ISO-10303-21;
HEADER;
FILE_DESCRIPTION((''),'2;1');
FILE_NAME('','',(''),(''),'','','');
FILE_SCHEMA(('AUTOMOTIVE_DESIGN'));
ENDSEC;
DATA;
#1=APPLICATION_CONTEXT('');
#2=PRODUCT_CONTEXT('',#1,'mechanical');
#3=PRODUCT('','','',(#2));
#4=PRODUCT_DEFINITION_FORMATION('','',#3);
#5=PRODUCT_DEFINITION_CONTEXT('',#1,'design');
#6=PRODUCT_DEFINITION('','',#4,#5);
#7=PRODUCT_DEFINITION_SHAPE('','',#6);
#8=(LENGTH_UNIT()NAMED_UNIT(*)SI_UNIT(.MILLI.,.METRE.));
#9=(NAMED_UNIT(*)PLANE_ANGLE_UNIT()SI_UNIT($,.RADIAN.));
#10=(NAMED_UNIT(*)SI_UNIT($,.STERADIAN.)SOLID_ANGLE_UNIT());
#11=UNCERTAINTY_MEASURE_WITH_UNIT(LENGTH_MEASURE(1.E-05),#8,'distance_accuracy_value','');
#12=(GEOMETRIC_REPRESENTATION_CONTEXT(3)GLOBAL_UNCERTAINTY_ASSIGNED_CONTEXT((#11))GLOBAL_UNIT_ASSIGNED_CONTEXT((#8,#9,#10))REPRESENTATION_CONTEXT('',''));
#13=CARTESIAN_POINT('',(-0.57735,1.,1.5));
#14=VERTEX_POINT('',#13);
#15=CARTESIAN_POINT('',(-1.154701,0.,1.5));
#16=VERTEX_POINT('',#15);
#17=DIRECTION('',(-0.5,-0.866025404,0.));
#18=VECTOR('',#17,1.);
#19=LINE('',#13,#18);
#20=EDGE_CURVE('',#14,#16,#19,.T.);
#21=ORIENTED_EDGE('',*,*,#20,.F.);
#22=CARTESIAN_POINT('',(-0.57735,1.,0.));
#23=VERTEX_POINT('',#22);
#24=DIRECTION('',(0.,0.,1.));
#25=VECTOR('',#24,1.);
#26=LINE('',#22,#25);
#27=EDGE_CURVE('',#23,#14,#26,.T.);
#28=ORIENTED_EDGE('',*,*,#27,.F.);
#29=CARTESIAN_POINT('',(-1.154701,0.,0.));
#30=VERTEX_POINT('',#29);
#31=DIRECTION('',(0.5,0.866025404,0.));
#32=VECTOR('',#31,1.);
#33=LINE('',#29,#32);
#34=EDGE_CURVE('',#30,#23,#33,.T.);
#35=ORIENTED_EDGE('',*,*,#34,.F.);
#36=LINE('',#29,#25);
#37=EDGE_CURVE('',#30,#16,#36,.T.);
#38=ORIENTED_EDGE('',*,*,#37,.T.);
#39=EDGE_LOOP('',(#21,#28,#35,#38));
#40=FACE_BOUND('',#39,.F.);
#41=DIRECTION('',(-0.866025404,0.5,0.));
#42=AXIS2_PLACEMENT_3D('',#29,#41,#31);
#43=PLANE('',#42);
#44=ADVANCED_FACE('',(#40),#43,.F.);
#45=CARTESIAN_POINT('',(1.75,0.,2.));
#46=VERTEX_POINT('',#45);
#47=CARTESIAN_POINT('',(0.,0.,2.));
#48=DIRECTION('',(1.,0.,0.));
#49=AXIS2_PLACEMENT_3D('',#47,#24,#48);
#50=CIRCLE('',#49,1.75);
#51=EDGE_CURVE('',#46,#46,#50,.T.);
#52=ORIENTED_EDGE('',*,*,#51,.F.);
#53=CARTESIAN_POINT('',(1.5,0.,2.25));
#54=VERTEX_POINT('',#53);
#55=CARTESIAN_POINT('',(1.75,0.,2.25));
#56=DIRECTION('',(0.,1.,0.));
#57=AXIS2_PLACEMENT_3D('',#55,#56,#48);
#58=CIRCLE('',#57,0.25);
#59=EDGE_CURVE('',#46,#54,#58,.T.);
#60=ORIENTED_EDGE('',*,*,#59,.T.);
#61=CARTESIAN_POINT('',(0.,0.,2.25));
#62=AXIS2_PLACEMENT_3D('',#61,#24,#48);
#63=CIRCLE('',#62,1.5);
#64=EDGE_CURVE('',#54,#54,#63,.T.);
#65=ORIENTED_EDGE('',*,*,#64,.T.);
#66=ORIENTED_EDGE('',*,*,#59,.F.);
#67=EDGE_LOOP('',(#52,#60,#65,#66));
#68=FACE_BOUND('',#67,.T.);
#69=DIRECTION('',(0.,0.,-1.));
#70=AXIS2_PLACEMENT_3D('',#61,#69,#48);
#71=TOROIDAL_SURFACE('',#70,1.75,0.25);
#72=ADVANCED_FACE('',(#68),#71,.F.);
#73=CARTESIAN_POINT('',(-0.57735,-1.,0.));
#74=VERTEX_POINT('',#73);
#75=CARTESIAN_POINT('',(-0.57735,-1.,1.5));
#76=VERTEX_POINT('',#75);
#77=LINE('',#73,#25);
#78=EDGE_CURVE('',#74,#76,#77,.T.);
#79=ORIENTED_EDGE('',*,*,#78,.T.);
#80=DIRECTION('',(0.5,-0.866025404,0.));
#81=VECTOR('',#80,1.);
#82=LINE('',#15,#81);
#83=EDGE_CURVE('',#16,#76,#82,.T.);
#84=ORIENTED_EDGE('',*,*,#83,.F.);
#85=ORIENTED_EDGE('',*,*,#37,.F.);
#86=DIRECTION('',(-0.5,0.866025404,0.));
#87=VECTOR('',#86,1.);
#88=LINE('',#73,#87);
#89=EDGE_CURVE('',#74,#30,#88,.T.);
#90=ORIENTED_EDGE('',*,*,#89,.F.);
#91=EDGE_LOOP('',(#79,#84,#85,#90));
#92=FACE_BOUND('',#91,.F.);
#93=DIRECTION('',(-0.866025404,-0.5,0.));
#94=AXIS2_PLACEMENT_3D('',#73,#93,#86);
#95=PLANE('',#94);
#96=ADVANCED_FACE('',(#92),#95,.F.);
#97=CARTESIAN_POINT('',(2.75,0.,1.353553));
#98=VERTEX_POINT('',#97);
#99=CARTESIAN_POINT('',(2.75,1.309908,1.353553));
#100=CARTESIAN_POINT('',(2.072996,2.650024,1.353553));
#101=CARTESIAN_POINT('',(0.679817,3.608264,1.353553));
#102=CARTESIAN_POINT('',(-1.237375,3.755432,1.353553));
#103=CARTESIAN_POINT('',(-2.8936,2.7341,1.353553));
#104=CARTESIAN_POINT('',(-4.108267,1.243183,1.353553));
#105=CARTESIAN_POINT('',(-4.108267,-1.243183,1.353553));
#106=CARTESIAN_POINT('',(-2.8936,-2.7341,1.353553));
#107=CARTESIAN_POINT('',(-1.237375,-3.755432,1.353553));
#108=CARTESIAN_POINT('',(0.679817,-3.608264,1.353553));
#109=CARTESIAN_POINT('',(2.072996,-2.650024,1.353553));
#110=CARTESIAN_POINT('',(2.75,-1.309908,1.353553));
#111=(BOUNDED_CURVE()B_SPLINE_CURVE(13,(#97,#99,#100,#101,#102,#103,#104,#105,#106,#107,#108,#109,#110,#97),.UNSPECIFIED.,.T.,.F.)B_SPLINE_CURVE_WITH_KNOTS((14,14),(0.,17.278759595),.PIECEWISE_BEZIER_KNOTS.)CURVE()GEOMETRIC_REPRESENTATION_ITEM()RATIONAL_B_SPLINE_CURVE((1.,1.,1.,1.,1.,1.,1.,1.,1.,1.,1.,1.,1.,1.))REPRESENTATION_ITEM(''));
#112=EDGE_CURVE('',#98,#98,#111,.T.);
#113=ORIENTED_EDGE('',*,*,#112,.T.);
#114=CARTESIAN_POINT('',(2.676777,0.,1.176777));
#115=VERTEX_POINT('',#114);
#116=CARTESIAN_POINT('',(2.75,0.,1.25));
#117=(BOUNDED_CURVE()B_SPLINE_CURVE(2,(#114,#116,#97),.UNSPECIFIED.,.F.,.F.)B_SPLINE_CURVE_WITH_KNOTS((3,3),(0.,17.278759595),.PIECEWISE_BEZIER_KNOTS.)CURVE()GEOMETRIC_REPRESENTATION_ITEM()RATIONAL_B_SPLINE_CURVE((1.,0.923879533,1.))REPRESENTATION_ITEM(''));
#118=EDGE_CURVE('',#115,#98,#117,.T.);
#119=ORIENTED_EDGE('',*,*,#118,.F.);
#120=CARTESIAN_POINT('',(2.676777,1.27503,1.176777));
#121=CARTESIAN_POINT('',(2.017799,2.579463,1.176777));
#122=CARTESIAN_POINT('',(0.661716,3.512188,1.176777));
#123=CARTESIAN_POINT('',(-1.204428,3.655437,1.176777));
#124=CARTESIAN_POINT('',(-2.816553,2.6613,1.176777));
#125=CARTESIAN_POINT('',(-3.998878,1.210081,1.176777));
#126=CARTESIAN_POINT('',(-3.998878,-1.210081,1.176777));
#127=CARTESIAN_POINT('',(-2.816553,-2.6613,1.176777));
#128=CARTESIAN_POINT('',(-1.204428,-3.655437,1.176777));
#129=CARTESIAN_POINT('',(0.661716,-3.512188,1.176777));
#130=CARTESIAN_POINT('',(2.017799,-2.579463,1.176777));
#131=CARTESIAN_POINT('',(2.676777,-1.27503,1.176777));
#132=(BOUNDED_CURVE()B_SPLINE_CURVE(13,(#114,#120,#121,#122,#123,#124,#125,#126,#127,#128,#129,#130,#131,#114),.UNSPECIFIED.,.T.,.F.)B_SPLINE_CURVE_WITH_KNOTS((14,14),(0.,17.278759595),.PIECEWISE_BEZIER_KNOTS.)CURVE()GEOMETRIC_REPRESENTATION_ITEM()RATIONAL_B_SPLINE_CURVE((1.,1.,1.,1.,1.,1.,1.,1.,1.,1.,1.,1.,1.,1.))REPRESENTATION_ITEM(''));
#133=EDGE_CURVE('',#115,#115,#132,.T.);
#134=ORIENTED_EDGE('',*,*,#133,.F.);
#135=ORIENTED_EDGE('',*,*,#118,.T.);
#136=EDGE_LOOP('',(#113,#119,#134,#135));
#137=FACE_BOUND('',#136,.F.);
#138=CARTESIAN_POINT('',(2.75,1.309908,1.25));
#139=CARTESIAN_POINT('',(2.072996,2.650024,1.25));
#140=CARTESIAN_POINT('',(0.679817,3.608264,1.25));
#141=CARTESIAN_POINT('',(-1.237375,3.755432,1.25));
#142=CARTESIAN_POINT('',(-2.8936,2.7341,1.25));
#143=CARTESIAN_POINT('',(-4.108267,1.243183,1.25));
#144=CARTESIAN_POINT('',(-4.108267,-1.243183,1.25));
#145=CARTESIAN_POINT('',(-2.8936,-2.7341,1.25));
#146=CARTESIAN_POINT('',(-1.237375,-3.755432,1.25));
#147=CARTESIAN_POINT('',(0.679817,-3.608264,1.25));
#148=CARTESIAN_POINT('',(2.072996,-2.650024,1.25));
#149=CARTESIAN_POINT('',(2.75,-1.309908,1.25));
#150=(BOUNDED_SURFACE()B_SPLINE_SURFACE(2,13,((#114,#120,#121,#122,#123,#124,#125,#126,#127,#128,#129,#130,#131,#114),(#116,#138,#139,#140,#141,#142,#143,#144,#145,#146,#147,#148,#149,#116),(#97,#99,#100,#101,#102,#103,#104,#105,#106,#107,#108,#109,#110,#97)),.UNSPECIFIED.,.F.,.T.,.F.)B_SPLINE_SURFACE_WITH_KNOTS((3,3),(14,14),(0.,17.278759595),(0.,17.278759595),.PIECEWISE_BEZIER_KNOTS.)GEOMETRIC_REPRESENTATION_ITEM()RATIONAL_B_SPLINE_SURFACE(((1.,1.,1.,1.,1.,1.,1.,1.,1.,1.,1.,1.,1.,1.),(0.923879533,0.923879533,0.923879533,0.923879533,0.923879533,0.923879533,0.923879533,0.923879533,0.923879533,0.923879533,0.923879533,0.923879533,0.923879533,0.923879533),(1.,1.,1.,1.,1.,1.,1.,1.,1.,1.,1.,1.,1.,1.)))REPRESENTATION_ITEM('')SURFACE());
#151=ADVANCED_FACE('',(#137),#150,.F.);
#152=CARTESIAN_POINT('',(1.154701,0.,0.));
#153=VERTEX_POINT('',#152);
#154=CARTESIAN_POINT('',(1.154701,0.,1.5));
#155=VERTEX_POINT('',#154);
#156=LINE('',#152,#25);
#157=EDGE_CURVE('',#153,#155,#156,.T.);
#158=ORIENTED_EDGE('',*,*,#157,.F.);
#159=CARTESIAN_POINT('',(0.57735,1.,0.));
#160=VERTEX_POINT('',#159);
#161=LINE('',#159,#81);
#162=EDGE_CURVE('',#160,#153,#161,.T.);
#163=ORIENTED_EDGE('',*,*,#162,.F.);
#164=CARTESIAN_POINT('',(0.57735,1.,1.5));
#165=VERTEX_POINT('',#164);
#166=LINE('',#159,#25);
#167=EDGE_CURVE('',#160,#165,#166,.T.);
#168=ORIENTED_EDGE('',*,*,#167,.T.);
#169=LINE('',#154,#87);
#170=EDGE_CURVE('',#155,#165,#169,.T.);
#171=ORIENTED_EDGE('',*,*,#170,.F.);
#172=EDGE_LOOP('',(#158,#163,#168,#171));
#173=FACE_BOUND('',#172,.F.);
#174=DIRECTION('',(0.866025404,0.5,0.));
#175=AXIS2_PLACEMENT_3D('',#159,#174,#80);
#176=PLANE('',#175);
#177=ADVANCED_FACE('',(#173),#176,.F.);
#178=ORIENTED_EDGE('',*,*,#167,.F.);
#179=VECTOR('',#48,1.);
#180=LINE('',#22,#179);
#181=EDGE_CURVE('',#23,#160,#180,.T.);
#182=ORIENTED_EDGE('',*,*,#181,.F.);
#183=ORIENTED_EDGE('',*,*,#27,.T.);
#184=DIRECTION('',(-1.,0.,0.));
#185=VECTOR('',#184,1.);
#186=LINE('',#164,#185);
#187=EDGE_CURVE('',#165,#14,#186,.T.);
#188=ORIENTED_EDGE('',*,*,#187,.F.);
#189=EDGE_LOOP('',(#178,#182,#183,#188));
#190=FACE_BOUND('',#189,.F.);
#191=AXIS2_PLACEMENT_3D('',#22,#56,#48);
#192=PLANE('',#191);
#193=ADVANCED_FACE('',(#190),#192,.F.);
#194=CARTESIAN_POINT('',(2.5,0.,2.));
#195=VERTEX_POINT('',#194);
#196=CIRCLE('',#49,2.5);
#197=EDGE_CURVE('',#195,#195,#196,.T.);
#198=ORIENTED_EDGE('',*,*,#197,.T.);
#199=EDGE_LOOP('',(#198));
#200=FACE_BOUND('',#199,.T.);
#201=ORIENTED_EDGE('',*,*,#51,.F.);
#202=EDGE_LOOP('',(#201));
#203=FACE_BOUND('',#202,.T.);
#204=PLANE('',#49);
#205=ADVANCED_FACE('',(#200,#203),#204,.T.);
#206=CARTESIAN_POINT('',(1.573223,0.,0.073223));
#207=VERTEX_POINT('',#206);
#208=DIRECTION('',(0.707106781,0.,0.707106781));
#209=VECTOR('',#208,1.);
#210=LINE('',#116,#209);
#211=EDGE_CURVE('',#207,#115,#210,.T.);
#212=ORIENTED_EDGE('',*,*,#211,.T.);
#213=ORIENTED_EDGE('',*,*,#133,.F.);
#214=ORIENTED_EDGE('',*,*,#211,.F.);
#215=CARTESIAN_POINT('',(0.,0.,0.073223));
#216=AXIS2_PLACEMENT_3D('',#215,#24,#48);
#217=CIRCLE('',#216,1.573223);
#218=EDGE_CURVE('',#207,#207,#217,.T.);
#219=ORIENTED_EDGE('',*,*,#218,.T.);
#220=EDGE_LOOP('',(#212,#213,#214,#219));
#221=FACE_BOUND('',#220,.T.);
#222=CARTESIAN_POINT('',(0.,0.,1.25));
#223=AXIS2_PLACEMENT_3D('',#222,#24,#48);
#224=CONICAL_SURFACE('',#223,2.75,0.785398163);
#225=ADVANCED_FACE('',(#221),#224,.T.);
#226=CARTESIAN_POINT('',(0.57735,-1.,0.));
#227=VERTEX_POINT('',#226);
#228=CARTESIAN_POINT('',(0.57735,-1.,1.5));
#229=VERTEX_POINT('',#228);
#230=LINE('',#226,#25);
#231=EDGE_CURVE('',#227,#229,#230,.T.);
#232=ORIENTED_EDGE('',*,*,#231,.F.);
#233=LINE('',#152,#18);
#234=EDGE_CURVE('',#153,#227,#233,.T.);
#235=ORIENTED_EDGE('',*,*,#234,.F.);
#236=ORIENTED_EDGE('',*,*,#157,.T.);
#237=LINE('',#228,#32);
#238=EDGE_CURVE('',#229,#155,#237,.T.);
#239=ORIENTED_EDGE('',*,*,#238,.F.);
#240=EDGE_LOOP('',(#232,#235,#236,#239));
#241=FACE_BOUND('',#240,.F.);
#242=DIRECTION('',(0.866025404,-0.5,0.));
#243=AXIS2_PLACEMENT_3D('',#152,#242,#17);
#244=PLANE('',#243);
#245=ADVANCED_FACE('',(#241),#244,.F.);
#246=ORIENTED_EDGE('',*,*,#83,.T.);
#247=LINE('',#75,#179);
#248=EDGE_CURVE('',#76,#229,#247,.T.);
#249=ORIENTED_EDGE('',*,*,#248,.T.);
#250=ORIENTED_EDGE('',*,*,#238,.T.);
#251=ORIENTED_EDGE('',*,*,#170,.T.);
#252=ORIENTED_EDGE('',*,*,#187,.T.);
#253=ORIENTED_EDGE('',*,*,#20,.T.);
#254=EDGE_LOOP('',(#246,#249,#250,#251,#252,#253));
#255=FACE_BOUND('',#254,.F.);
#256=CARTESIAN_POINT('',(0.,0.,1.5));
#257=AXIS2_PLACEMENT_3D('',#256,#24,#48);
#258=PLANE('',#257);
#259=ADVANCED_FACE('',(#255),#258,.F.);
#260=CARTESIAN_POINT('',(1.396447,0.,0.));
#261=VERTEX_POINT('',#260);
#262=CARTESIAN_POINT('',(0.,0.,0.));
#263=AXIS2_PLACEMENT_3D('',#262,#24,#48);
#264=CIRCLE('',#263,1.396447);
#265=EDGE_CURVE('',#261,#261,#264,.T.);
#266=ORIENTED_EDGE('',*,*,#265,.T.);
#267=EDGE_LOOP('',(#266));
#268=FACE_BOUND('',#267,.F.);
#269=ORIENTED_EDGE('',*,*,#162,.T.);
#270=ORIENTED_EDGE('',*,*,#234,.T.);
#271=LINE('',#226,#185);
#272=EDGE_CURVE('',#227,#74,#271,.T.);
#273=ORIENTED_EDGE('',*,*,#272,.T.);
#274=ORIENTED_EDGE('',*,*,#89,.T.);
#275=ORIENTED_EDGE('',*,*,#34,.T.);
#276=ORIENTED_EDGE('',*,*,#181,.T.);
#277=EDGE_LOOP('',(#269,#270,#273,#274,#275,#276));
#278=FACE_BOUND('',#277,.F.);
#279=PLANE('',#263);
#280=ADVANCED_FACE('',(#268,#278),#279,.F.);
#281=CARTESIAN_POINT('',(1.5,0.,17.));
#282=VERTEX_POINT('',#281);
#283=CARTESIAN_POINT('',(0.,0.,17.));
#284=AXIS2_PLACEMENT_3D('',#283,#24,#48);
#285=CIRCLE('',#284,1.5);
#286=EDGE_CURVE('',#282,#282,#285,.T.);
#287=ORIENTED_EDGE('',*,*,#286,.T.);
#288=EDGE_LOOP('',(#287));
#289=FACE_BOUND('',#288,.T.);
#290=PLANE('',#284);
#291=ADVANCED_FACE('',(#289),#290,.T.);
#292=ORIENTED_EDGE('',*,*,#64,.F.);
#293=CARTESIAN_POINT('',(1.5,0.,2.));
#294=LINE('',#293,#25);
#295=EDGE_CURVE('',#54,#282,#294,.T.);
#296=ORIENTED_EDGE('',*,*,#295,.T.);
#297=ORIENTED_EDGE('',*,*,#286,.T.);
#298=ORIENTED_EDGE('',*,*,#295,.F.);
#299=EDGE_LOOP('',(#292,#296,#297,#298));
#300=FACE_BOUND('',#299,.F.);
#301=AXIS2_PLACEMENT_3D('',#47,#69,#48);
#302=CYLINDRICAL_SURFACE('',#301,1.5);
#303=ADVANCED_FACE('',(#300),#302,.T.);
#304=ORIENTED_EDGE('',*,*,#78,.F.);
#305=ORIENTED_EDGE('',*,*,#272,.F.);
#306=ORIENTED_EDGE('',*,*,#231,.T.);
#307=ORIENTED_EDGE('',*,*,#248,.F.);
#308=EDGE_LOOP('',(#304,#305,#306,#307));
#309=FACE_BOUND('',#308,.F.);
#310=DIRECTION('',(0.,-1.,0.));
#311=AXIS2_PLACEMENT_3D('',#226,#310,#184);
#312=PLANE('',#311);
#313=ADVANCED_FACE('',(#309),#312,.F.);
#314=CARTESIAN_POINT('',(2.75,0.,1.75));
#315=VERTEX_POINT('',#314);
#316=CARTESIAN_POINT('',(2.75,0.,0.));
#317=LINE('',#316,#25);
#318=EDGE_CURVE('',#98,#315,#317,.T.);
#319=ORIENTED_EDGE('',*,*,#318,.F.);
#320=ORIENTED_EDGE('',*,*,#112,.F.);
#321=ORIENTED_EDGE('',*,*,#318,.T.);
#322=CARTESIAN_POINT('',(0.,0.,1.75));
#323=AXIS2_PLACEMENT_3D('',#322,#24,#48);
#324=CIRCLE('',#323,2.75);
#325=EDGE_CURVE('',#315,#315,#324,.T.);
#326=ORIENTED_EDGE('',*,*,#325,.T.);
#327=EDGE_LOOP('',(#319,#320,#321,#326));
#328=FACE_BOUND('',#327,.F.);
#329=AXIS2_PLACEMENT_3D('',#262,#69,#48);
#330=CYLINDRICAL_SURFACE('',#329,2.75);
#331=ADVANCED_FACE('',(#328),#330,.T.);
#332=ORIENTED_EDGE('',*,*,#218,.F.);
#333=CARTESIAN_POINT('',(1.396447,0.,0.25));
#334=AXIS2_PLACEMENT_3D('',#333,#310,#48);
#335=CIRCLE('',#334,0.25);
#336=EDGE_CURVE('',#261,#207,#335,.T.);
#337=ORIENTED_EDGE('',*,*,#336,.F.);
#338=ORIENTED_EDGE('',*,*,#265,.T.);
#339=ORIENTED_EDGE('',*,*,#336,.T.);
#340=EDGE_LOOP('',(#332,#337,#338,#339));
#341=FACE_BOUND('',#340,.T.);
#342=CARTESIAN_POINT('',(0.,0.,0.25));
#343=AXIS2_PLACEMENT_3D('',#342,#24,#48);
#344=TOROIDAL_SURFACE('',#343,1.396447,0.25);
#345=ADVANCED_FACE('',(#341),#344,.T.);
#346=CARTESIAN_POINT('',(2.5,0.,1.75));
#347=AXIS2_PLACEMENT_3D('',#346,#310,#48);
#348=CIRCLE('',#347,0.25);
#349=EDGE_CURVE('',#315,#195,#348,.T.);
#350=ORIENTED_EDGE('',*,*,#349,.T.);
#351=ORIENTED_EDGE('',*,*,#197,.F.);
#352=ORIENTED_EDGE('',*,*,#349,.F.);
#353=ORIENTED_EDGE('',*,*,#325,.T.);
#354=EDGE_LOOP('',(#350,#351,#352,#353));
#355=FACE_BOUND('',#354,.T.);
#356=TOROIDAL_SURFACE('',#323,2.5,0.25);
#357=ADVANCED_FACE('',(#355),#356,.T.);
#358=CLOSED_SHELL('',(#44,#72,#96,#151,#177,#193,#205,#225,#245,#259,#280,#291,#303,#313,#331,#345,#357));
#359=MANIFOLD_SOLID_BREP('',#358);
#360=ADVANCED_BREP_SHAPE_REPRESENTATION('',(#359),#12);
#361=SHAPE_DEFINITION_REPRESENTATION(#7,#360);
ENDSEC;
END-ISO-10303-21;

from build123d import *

# Parameters (mm, degrees)
F1_R     = 2.75
F1_R_2   = 1.5
F2_DEPTH = 2
F3_START = 1.5
F3_DEPTH = 0.5
F4_START = 2
F4_DEPTH = 15
F5_SIZE2 = 1.25
F5_SIZE  = 1.25
F6_R     = 0.25


# Not quite as in the source:
# - a feature names something its author has since deleted; it is built from what else it names


with BuildPart() as f2:
    # F1 (on Top) → F2 (new body)
    with BuildSketch(Plane.XY):
        Circle(F1_R)
        Circle(F1_R_2, mode=Mode.SUBTRACT)
        Circle(F1_R_2)
        Polygon((-0.5773502692, -1), (-1.1547005384, 0), (-0.5773502692, 1), (0.5773502692, 1), (1.1547005384, 0), (0.5773502692, -1), align=None, mode=Mode.SUBTRACT)
    extrude(amount=F2_DEPTH)

    # F1 (on Top) → F3 (join)
    with BuildSketch(Plane.XY.offset(F3_START)):
        Polygon((-0.5773502692, 1), (-1.1547005384, 0), (-0.5773502692, -1), (0.5773502692, -1), (1.1547005384, 0), (0.5773502692, 1), align=None)
    extrude(amount=F3_DEPTH)

    # F1 (on Top) → F4 (join)
    with BuildSketch(Plane.XY.offset(F4_START)):
        Circle(F1_R_2)
        Polygon((-0.5773502692, -1), (-1.1547005384, 0), (-0.5773502692, 1), (0.5773502692, 1), (1.1547005384, 0), (0.5773502692, -1), align=None, mode=Mode.SUBTRACT)
        Polygon((-0.5773502692, 1), (-1.1547005384, 0), (-0.5773502692, -1), (0.5773502692, -1), (1.1547005384, 0), (0.5773502692, 1), align=None)
    extrude(amount=F4_DEPTH)

    # F5
    f5_edges = [f2.edges().sort_by_distance(p)[0] for p in [
        (-2.75, 0, 0),
    ]]
    chamfer(f5_edges, length=F5_SIZE, length2=F5_SIZE2)

    # F6
    f6_edges = [f2.edges().sort_by_distance(p)[0] for p in [
        (-2.75, 0, 2),
        (-1.5, 0, 2),
        (-1.5, 0, 0),
        (-2.75, 0, 1.25),
    ]]
    fillet(f6_edges, radius=F6_R)


solid = f2.part
